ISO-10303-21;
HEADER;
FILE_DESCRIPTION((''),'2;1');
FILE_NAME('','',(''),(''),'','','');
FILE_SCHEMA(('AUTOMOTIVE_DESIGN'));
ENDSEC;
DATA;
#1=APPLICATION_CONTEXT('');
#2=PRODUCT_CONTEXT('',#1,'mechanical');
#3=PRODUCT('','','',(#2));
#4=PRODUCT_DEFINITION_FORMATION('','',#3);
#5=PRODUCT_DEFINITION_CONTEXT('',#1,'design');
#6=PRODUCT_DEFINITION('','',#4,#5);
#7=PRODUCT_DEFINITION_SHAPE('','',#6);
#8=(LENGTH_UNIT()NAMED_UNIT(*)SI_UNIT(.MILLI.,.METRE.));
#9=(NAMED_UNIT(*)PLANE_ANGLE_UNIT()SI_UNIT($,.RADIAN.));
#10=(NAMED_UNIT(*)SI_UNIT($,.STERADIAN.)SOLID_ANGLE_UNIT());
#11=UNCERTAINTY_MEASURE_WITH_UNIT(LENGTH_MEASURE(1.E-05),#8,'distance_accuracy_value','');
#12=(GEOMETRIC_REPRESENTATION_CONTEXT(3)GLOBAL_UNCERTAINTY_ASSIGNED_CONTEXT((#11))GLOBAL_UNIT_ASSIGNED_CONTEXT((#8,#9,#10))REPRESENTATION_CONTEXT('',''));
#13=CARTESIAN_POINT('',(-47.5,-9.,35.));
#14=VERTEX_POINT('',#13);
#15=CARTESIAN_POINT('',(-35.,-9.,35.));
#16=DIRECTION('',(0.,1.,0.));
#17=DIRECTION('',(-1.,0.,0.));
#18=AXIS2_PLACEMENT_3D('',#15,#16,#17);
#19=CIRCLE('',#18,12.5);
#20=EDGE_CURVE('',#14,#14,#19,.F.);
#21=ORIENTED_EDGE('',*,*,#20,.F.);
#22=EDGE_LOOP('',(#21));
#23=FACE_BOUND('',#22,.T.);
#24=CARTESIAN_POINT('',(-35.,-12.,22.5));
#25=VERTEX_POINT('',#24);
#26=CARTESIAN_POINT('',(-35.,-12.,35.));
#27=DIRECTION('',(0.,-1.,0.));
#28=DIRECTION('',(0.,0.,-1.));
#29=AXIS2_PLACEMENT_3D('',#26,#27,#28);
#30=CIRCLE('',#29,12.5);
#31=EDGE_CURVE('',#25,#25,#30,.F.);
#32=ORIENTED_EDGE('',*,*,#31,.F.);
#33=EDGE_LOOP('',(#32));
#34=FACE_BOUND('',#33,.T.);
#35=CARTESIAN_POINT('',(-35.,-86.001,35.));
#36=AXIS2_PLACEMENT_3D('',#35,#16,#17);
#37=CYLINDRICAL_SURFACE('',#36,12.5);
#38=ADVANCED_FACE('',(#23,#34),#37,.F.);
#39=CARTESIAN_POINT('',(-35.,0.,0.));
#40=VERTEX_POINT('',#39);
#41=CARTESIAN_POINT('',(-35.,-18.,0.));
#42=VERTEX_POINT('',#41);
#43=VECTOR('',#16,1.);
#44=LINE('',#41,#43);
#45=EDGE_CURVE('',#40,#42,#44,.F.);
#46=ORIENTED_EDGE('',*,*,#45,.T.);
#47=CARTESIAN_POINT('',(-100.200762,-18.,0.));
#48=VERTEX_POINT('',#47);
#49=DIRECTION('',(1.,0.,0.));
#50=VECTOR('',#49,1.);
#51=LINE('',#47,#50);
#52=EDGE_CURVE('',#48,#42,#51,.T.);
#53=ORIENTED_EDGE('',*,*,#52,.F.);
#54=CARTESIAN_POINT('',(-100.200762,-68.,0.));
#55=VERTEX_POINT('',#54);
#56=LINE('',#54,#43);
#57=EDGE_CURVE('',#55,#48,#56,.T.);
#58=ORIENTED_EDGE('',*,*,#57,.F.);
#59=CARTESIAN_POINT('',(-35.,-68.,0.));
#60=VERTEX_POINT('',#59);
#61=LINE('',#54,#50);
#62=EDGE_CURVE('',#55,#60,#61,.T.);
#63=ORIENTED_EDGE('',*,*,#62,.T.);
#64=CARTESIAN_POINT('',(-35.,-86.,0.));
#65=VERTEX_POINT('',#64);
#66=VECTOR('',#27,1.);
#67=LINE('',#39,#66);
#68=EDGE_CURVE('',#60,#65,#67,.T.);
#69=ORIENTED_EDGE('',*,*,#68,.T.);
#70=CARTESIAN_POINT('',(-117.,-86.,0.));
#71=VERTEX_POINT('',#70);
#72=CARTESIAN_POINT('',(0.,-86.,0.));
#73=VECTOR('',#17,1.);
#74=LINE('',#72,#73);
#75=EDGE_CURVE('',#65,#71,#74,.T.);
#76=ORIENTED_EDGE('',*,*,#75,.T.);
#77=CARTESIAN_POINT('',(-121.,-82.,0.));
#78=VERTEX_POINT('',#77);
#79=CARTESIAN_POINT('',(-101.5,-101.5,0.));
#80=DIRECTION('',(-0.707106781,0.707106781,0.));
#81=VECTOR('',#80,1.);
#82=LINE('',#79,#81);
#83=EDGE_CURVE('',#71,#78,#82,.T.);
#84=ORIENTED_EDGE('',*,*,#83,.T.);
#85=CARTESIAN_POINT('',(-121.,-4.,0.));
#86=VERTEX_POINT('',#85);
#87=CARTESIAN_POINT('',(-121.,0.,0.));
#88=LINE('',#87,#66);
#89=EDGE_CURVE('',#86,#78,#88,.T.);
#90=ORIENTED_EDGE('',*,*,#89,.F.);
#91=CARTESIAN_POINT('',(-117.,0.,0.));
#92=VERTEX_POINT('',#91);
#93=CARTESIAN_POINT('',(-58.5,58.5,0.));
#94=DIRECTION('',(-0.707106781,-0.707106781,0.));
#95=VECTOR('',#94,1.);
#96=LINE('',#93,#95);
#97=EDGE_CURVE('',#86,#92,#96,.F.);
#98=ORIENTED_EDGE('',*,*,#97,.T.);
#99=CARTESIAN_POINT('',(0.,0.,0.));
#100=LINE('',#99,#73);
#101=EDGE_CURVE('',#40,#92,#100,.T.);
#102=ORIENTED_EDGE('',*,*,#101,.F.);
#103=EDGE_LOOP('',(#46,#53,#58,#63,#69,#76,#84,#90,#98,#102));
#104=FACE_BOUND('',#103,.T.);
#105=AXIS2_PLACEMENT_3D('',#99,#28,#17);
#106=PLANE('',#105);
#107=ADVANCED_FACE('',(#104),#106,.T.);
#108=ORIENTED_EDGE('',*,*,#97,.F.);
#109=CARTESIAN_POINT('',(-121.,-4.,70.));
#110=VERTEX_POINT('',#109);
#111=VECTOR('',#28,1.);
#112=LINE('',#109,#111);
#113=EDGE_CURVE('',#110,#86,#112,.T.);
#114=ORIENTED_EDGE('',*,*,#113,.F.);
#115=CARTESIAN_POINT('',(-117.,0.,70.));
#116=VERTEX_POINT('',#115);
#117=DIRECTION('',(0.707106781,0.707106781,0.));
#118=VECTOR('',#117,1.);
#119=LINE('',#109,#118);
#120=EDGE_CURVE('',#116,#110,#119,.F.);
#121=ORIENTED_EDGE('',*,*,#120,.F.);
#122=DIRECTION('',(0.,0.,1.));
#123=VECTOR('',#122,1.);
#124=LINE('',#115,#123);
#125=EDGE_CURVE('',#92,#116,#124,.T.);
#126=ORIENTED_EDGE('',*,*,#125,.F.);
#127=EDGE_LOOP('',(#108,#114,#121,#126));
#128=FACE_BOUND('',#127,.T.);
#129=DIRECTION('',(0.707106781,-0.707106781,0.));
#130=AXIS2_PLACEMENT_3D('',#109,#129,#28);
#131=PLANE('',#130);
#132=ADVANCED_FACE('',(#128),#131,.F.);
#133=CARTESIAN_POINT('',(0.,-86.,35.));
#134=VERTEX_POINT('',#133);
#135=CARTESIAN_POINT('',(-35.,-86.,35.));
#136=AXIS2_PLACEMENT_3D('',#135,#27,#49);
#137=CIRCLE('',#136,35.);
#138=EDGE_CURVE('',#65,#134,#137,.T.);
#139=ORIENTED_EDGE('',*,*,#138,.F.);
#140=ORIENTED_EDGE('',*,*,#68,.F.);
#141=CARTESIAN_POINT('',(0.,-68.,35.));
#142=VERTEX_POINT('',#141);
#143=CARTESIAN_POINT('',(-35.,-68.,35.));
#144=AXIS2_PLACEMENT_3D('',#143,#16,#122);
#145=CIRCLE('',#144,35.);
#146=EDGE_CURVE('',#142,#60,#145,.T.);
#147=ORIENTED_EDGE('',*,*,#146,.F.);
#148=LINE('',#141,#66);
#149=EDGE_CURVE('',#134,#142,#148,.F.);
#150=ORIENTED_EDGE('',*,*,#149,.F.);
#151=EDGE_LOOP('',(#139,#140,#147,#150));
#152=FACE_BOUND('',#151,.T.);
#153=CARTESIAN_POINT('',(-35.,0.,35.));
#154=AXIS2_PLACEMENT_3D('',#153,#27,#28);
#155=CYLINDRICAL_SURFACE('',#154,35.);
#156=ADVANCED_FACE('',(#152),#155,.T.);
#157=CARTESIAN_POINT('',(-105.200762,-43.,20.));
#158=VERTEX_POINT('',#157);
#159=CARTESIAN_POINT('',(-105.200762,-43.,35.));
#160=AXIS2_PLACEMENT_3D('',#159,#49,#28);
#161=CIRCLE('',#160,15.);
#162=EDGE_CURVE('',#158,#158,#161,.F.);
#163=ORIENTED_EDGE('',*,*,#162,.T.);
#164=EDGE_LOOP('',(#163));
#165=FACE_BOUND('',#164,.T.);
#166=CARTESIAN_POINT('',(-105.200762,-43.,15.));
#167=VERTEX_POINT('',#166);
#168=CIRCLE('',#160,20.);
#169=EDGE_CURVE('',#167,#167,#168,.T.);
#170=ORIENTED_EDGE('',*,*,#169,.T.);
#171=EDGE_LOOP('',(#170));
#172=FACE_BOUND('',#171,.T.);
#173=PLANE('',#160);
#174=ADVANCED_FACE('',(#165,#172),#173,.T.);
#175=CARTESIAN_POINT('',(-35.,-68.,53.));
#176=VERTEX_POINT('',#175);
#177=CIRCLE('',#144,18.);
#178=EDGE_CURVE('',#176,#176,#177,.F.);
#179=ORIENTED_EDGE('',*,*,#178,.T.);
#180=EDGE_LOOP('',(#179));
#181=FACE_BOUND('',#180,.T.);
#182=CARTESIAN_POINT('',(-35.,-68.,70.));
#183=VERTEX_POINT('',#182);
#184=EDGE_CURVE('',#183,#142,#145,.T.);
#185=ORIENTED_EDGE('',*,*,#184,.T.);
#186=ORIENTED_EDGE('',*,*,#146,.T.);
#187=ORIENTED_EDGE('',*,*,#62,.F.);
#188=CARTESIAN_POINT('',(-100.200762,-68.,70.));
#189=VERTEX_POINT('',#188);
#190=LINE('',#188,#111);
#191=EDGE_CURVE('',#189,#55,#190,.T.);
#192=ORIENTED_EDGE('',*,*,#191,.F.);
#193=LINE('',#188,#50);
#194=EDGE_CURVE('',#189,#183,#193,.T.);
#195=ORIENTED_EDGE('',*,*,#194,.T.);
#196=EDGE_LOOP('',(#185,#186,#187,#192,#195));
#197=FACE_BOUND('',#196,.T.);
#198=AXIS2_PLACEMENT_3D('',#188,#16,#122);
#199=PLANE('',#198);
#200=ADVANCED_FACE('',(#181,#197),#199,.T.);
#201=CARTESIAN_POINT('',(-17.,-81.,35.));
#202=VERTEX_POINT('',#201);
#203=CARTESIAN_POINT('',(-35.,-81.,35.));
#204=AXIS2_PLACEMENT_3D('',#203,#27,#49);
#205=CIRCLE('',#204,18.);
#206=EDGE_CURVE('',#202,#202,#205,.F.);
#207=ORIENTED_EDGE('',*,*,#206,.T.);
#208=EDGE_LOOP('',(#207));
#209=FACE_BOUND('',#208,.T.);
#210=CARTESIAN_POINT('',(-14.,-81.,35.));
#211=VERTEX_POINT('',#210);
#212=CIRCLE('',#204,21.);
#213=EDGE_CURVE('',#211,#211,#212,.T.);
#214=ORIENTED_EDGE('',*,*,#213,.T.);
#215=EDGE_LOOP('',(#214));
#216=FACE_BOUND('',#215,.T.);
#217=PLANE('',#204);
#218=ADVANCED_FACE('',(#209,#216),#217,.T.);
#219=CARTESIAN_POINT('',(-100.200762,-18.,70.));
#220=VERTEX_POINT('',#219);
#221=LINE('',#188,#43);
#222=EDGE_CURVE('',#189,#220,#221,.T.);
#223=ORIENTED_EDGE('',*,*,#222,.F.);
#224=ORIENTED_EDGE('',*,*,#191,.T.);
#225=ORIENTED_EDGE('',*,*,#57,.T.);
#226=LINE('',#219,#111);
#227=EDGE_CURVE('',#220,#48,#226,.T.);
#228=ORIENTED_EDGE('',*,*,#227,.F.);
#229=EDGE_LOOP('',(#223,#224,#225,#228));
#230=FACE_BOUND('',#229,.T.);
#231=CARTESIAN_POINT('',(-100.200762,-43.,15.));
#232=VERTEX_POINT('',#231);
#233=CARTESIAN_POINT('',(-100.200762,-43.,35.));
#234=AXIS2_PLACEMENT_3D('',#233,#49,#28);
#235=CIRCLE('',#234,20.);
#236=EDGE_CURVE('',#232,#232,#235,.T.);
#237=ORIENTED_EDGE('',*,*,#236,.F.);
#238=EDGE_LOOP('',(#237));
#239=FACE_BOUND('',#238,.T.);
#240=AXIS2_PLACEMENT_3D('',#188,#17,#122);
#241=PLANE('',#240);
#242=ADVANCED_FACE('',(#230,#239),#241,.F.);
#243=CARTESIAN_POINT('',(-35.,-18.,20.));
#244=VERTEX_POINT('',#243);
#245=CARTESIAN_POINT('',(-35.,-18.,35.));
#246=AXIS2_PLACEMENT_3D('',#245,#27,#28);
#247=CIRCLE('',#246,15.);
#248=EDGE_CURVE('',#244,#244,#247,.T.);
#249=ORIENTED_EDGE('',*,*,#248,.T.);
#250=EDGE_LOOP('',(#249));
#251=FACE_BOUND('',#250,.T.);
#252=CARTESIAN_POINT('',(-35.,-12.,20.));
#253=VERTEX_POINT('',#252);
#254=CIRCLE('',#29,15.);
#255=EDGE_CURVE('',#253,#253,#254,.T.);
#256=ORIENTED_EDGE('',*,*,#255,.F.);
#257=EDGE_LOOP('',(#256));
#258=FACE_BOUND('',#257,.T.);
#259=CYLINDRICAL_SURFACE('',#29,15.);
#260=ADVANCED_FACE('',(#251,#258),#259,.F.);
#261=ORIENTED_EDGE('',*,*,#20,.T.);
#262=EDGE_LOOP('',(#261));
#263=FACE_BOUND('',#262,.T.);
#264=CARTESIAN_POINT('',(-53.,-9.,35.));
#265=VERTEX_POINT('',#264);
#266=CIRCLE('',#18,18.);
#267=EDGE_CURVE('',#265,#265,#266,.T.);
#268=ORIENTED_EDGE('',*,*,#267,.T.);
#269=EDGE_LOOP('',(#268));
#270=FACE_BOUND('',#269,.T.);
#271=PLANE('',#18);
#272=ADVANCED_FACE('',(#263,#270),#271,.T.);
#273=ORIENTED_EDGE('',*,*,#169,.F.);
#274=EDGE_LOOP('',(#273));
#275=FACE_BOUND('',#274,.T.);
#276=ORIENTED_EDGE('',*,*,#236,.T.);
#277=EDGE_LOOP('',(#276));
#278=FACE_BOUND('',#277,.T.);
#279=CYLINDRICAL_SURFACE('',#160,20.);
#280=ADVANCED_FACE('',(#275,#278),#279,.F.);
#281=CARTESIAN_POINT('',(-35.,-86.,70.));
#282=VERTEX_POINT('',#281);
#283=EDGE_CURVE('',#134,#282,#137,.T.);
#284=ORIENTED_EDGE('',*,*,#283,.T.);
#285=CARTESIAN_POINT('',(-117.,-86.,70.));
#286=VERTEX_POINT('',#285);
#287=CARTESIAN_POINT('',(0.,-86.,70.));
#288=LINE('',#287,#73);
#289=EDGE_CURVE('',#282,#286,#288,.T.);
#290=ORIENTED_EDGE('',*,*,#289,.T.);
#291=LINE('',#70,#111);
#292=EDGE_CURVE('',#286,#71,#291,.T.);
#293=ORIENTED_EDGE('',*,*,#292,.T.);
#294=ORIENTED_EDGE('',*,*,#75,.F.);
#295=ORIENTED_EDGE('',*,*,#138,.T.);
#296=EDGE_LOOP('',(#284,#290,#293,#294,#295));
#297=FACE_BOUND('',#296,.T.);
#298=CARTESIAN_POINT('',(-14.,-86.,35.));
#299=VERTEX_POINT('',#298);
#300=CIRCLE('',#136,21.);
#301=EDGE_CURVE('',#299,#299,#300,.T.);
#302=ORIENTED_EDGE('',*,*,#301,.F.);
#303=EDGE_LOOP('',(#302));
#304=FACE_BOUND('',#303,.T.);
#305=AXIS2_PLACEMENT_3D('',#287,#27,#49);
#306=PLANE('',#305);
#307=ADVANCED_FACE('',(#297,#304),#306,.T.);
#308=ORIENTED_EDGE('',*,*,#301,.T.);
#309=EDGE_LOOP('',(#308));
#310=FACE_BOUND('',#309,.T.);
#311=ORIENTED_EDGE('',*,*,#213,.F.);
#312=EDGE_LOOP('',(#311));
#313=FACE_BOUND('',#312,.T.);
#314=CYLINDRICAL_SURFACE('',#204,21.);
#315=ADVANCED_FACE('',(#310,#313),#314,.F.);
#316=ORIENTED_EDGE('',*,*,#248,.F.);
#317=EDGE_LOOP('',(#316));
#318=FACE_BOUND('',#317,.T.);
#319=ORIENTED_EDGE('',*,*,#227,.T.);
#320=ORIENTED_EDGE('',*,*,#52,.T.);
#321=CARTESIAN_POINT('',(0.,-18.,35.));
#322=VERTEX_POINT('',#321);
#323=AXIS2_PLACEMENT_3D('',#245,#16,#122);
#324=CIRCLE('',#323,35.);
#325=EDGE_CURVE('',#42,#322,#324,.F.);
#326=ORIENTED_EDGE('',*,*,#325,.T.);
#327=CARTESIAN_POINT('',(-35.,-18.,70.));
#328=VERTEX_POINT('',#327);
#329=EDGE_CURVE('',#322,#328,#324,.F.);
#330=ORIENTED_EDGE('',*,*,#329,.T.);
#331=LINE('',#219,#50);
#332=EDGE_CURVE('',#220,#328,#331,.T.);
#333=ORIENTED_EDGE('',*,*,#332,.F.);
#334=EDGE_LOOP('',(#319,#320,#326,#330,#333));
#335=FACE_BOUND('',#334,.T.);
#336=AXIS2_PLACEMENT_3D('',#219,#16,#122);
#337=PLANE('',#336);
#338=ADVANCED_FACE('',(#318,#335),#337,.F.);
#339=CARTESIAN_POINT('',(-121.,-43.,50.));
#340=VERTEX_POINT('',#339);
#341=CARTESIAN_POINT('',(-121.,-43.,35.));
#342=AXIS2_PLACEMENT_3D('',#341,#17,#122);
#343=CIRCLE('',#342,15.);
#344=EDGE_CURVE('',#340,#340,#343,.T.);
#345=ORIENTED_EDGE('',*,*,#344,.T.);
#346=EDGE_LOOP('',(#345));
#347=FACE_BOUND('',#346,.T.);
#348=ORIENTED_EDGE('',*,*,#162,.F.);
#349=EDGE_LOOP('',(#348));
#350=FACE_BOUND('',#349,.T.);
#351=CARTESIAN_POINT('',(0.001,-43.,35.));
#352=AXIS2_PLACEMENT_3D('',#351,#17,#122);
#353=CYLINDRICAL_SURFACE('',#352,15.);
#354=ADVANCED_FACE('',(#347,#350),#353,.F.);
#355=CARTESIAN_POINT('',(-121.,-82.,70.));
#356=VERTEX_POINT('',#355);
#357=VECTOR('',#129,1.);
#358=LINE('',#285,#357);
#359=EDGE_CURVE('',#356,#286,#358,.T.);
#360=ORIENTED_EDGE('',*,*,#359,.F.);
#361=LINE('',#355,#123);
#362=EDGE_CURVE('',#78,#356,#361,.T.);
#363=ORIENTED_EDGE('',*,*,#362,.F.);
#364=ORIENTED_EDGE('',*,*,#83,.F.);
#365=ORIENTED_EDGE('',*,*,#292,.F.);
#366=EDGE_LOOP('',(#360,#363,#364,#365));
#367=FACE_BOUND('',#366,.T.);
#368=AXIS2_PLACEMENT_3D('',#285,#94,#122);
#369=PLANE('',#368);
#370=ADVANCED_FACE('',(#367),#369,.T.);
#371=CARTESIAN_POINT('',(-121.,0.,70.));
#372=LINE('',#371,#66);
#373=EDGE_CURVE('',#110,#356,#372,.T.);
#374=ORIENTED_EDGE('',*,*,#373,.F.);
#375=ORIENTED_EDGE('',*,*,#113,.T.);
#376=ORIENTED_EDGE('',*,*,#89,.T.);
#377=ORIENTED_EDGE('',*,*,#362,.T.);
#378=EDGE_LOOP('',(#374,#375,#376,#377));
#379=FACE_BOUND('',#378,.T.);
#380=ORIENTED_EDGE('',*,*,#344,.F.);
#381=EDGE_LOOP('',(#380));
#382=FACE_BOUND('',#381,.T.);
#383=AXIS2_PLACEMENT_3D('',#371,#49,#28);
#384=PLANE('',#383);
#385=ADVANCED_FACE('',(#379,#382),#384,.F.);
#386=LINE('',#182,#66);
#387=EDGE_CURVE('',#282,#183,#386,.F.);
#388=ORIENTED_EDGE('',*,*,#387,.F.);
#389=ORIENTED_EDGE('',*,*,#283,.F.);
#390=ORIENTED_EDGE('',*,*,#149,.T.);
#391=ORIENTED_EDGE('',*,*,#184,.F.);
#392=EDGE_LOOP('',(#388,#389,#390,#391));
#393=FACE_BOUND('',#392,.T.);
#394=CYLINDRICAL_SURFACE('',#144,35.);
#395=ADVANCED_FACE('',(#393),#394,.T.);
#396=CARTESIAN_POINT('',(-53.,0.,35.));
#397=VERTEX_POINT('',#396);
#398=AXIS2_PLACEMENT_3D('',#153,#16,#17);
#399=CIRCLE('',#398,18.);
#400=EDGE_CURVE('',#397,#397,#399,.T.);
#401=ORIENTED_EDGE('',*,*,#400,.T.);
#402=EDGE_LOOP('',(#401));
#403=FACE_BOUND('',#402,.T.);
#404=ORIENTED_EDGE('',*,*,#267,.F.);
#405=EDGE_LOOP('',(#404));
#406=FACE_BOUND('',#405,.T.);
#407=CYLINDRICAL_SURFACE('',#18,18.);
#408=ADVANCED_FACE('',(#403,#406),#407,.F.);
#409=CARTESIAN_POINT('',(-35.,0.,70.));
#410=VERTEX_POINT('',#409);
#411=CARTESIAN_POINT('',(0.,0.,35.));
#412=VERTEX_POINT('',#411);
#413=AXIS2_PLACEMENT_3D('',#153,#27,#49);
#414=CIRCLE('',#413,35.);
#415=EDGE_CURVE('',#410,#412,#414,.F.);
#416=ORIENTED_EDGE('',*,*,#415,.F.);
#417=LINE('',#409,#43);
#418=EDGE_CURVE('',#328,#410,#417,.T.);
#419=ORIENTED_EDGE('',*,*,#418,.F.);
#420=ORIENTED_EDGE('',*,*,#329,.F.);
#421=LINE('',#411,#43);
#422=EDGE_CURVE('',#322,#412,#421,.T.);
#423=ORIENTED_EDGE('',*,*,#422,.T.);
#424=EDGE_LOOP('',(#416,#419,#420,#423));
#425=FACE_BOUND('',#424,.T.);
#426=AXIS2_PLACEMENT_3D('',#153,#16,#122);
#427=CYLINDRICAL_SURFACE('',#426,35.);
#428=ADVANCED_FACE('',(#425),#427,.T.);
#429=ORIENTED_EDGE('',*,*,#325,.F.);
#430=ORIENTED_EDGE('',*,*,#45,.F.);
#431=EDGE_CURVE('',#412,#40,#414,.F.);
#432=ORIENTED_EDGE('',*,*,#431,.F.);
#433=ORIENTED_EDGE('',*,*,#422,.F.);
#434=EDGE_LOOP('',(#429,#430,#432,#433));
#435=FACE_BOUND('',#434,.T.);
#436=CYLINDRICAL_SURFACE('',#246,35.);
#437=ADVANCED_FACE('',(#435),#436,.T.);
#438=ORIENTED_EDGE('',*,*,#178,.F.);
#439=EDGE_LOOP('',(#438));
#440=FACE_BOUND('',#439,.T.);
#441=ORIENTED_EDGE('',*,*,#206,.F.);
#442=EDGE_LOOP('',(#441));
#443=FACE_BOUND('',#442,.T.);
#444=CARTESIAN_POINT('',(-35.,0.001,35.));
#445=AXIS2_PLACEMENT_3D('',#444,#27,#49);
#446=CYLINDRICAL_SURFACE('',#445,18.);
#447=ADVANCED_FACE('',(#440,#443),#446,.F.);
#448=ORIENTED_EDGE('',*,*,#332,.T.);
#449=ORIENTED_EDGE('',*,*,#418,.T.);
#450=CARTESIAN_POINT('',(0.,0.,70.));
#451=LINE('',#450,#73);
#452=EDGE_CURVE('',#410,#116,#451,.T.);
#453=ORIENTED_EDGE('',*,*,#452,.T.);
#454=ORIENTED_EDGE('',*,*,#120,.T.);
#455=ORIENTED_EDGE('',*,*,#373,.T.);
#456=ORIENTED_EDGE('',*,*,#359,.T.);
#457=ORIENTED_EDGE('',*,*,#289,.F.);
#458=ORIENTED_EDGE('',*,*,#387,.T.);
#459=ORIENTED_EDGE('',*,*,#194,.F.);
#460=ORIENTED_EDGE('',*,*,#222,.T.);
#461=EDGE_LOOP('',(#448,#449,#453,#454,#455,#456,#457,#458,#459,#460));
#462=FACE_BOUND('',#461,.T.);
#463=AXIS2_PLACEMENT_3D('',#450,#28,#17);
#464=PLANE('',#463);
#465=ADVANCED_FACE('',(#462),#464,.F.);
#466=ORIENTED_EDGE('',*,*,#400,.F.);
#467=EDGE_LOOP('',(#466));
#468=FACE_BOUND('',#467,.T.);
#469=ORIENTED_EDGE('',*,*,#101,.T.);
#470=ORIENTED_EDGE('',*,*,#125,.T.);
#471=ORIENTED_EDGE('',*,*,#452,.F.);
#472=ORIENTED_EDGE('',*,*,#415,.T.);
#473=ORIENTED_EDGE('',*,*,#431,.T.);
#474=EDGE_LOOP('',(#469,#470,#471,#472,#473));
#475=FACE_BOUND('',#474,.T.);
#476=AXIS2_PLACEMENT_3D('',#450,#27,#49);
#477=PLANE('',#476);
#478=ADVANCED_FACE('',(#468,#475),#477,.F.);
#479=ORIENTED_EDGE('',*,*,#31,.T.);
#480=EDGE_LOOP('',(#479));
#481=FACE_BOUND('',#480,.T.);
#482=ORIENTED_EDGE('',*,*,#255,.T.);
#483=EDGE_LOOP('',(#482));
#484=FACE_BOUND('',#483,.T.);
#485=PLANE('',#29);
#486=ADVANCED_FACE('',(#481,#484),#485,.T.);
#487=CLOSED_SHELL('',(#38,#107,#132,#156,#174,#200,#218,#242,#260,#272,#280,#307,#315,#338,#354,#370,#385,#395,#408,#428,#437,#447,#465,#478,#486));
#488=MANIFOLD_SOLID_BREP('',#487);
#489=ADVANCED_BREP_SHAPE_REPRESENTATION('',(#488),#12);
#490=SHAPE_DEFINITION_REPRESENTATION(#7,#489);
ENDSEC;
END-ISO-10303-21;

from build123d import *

# Parameters (mm, degrees)
P_IDAT_VYSUNUT_M1_DEPTH  = 70
ZAOBLIT1_R               = 35
ODEBRAT_VYSUNUT_M2_REACH = 166.125
SKICA3_R                 = 15
SKICA5_R                 = 20
ODEBRAT_VYSUNUT_M3_DEPTH = 5
ODEBRAT_VYSUNUT_M4_REACH = 166.125
SKICA6_R                 = 12.5
SKICA7_R                 = 18
ODEBRAT_VYSUNUT_M5_DEPTH = 9
SKICA8_R                 = 15
ODEBRAT_VYSUNUT_M6_DEPTH = 6
ODEBRAT_VYSUNUT_M7_REACH = 166.125
SKICA9_R                 = 18
SKICA10_R                = 21
ODEBRAT_VYSUNUT_M8_DEPTH = 5
ZKOSEN_1_SIZE            = 4


with BuildPart() as part:
    # Skica2 → Přidat vysunutím1 (new body)
    with BuildSketch(Plane.XY):
        Polygon((0, 0), (-121, 0), (-121, -86), (0, -86), (0, -68), (-100.200761753, -68), (-100.200761753, -18), (0, -18), align=None)
    extrude(amount=P_IDAT_VYSUNUT_M1_DEPTH)

    # Zaoblit1
    zaoblit1_edges = [part.edges().sort_by_distance(p)[0] for p in [
        (0, -77, 70),
        (0, -77, 0),
        (0, -9, 70),
        (0, -9, 0),
    ]]
    fillet(zaoblit1_edges, radius=ZAOBLIT1_R - 0.0001)  # a hair under: the kernel refuses the full size

    # Skica3 → Odebrat vysunutím2 (cut, up to next)
    with BuildSketch(Plane.ZY.offset(121), mode=Mode.PRIVATE) as odebrat_vysunut_m2_sk1:
        with Locations((35, -43)):
            Circle(SKICA3_R)
    odebrat_vysunut_m2_tool1 = extrude(odebrat_vysunut_m2_sk1.sketch, amount=-ODEBRAT_VYSUNUT_M2_REACH, mode=Mode.PRIVATE) & part.part
    add(odebrat_vysunut_m2_tool1.solids().sort_by_distance((-121, -43, 35))[0], mode=Mode.SUBTRACT)

    # Skica5 → Odebrat vysunutím3 (cut)
    with BuildSketch(Plane(origin=(-100.200761753, 0, 0), x_dir=(0, 0, -1), z_dir=(1, 0, 0))):
        with Locations((-35, -43)):
            Circle(SKICA5_R)
    extrude(amount=-ODEBRAT_VYSUNUT_M3_DEPTH, mode=Mode.SUBTRACT)

    # Skica6 → Odebrat vysunutím4 (cut, up to next)
    with BuildSketch(Plane(origin=(0, 0, 0), x_dir=(1, 0, 0), z_dir=(0, 1, 0)), mode=Mode.PRIVATE) as odebrat_vysunut_m4_sk1:
        with Locations(Location((-35, -35, 0), (0, 0, 180))):
            Circle(SKICA6_R)
    odebrat_vysunut_m4_tool1 = extrude(odebrat_vysunut_m4_sk1.sketch, amount=-ODEBRAT_VYSUNUT_M4_REACH, mode=Mode.PRIVATE) & part.part
    add(odebrat_vysunut_m4_tool1.solids().sort_by_distance((-35, 0, 35))[0], mode=Mode.SUBTRACT)

    # Skica7 → Odebrat vysunutím5 (cut)
    with BuildSketch(Plane(origin=(0, 0, 0), x_dir=(1, 0, 0), z_dir=(0, 1, 0))):
        with Locations(Location((-35, -35, 0), (0, 0, 180))):
            Circle(SKICA7_R)
    extrude(amount=-ODEBRAT_VYSUNUT_M5_DEPTH, mode=Mode.SUBTRACT)

    # Skica8 → Odebrat vysunutím6 (cut)
    with BuildSketch(Plane.XZ.offset(18)):
        with Locations(Location((-35, 35, 0), (0, 0, 270))):
            Circle(SKICA8_R)
    extrude(amount=-ODEBRAT_VYSUNUT_M6_DEPTH, mode=Mode.SUBTRACT)

    # Skica9 → Odebrat vysunutím7 (cut, up to next)
    with BuildSketch(Plane.XZ.offset(86), mode=Mode.PRIVATE) as odebrat_vysunut_m7_sk1:
        with Locations(Location((-35, 35, 0), (0, 0, 180))):
            Circle(SKICA9_R)
    odebrat_vysunut_m7_tool1 = extrude(odebrat_vysunut_m7_sk1.sketch, amount=-ODEBRAT_VYSUNUT_M7_REACH, mode=Mode.PRIVATE) & part.part
    add(odebrat_vysunut_m7_tool1.solids().sort_by_distance((-35, -86, 35))[0], mode=Mode.SUBTRACT)

    # Skica10 → Odebrat vysunutím8 (cut)
    with BuildSketch(Plane.XZ.offset(86)):
        with Locations((-35, 35)):
            Circle(SKICA10_R)
    extrude(amount=-ODEBRAT_VYSUNUT_M8_DEPTH, mode=Mode.SUBTRACT)

    # Zkosení1
    zkosen_1_edges = [part.edges().sort_by_distance(p)[0] for p in [
        (-121, -86, 35),
        (-121, 0, 35),
    ]]
    chamfer(zkosen_1_edges, length=ZKOSEN_1_SIZE)


solid = part.part
